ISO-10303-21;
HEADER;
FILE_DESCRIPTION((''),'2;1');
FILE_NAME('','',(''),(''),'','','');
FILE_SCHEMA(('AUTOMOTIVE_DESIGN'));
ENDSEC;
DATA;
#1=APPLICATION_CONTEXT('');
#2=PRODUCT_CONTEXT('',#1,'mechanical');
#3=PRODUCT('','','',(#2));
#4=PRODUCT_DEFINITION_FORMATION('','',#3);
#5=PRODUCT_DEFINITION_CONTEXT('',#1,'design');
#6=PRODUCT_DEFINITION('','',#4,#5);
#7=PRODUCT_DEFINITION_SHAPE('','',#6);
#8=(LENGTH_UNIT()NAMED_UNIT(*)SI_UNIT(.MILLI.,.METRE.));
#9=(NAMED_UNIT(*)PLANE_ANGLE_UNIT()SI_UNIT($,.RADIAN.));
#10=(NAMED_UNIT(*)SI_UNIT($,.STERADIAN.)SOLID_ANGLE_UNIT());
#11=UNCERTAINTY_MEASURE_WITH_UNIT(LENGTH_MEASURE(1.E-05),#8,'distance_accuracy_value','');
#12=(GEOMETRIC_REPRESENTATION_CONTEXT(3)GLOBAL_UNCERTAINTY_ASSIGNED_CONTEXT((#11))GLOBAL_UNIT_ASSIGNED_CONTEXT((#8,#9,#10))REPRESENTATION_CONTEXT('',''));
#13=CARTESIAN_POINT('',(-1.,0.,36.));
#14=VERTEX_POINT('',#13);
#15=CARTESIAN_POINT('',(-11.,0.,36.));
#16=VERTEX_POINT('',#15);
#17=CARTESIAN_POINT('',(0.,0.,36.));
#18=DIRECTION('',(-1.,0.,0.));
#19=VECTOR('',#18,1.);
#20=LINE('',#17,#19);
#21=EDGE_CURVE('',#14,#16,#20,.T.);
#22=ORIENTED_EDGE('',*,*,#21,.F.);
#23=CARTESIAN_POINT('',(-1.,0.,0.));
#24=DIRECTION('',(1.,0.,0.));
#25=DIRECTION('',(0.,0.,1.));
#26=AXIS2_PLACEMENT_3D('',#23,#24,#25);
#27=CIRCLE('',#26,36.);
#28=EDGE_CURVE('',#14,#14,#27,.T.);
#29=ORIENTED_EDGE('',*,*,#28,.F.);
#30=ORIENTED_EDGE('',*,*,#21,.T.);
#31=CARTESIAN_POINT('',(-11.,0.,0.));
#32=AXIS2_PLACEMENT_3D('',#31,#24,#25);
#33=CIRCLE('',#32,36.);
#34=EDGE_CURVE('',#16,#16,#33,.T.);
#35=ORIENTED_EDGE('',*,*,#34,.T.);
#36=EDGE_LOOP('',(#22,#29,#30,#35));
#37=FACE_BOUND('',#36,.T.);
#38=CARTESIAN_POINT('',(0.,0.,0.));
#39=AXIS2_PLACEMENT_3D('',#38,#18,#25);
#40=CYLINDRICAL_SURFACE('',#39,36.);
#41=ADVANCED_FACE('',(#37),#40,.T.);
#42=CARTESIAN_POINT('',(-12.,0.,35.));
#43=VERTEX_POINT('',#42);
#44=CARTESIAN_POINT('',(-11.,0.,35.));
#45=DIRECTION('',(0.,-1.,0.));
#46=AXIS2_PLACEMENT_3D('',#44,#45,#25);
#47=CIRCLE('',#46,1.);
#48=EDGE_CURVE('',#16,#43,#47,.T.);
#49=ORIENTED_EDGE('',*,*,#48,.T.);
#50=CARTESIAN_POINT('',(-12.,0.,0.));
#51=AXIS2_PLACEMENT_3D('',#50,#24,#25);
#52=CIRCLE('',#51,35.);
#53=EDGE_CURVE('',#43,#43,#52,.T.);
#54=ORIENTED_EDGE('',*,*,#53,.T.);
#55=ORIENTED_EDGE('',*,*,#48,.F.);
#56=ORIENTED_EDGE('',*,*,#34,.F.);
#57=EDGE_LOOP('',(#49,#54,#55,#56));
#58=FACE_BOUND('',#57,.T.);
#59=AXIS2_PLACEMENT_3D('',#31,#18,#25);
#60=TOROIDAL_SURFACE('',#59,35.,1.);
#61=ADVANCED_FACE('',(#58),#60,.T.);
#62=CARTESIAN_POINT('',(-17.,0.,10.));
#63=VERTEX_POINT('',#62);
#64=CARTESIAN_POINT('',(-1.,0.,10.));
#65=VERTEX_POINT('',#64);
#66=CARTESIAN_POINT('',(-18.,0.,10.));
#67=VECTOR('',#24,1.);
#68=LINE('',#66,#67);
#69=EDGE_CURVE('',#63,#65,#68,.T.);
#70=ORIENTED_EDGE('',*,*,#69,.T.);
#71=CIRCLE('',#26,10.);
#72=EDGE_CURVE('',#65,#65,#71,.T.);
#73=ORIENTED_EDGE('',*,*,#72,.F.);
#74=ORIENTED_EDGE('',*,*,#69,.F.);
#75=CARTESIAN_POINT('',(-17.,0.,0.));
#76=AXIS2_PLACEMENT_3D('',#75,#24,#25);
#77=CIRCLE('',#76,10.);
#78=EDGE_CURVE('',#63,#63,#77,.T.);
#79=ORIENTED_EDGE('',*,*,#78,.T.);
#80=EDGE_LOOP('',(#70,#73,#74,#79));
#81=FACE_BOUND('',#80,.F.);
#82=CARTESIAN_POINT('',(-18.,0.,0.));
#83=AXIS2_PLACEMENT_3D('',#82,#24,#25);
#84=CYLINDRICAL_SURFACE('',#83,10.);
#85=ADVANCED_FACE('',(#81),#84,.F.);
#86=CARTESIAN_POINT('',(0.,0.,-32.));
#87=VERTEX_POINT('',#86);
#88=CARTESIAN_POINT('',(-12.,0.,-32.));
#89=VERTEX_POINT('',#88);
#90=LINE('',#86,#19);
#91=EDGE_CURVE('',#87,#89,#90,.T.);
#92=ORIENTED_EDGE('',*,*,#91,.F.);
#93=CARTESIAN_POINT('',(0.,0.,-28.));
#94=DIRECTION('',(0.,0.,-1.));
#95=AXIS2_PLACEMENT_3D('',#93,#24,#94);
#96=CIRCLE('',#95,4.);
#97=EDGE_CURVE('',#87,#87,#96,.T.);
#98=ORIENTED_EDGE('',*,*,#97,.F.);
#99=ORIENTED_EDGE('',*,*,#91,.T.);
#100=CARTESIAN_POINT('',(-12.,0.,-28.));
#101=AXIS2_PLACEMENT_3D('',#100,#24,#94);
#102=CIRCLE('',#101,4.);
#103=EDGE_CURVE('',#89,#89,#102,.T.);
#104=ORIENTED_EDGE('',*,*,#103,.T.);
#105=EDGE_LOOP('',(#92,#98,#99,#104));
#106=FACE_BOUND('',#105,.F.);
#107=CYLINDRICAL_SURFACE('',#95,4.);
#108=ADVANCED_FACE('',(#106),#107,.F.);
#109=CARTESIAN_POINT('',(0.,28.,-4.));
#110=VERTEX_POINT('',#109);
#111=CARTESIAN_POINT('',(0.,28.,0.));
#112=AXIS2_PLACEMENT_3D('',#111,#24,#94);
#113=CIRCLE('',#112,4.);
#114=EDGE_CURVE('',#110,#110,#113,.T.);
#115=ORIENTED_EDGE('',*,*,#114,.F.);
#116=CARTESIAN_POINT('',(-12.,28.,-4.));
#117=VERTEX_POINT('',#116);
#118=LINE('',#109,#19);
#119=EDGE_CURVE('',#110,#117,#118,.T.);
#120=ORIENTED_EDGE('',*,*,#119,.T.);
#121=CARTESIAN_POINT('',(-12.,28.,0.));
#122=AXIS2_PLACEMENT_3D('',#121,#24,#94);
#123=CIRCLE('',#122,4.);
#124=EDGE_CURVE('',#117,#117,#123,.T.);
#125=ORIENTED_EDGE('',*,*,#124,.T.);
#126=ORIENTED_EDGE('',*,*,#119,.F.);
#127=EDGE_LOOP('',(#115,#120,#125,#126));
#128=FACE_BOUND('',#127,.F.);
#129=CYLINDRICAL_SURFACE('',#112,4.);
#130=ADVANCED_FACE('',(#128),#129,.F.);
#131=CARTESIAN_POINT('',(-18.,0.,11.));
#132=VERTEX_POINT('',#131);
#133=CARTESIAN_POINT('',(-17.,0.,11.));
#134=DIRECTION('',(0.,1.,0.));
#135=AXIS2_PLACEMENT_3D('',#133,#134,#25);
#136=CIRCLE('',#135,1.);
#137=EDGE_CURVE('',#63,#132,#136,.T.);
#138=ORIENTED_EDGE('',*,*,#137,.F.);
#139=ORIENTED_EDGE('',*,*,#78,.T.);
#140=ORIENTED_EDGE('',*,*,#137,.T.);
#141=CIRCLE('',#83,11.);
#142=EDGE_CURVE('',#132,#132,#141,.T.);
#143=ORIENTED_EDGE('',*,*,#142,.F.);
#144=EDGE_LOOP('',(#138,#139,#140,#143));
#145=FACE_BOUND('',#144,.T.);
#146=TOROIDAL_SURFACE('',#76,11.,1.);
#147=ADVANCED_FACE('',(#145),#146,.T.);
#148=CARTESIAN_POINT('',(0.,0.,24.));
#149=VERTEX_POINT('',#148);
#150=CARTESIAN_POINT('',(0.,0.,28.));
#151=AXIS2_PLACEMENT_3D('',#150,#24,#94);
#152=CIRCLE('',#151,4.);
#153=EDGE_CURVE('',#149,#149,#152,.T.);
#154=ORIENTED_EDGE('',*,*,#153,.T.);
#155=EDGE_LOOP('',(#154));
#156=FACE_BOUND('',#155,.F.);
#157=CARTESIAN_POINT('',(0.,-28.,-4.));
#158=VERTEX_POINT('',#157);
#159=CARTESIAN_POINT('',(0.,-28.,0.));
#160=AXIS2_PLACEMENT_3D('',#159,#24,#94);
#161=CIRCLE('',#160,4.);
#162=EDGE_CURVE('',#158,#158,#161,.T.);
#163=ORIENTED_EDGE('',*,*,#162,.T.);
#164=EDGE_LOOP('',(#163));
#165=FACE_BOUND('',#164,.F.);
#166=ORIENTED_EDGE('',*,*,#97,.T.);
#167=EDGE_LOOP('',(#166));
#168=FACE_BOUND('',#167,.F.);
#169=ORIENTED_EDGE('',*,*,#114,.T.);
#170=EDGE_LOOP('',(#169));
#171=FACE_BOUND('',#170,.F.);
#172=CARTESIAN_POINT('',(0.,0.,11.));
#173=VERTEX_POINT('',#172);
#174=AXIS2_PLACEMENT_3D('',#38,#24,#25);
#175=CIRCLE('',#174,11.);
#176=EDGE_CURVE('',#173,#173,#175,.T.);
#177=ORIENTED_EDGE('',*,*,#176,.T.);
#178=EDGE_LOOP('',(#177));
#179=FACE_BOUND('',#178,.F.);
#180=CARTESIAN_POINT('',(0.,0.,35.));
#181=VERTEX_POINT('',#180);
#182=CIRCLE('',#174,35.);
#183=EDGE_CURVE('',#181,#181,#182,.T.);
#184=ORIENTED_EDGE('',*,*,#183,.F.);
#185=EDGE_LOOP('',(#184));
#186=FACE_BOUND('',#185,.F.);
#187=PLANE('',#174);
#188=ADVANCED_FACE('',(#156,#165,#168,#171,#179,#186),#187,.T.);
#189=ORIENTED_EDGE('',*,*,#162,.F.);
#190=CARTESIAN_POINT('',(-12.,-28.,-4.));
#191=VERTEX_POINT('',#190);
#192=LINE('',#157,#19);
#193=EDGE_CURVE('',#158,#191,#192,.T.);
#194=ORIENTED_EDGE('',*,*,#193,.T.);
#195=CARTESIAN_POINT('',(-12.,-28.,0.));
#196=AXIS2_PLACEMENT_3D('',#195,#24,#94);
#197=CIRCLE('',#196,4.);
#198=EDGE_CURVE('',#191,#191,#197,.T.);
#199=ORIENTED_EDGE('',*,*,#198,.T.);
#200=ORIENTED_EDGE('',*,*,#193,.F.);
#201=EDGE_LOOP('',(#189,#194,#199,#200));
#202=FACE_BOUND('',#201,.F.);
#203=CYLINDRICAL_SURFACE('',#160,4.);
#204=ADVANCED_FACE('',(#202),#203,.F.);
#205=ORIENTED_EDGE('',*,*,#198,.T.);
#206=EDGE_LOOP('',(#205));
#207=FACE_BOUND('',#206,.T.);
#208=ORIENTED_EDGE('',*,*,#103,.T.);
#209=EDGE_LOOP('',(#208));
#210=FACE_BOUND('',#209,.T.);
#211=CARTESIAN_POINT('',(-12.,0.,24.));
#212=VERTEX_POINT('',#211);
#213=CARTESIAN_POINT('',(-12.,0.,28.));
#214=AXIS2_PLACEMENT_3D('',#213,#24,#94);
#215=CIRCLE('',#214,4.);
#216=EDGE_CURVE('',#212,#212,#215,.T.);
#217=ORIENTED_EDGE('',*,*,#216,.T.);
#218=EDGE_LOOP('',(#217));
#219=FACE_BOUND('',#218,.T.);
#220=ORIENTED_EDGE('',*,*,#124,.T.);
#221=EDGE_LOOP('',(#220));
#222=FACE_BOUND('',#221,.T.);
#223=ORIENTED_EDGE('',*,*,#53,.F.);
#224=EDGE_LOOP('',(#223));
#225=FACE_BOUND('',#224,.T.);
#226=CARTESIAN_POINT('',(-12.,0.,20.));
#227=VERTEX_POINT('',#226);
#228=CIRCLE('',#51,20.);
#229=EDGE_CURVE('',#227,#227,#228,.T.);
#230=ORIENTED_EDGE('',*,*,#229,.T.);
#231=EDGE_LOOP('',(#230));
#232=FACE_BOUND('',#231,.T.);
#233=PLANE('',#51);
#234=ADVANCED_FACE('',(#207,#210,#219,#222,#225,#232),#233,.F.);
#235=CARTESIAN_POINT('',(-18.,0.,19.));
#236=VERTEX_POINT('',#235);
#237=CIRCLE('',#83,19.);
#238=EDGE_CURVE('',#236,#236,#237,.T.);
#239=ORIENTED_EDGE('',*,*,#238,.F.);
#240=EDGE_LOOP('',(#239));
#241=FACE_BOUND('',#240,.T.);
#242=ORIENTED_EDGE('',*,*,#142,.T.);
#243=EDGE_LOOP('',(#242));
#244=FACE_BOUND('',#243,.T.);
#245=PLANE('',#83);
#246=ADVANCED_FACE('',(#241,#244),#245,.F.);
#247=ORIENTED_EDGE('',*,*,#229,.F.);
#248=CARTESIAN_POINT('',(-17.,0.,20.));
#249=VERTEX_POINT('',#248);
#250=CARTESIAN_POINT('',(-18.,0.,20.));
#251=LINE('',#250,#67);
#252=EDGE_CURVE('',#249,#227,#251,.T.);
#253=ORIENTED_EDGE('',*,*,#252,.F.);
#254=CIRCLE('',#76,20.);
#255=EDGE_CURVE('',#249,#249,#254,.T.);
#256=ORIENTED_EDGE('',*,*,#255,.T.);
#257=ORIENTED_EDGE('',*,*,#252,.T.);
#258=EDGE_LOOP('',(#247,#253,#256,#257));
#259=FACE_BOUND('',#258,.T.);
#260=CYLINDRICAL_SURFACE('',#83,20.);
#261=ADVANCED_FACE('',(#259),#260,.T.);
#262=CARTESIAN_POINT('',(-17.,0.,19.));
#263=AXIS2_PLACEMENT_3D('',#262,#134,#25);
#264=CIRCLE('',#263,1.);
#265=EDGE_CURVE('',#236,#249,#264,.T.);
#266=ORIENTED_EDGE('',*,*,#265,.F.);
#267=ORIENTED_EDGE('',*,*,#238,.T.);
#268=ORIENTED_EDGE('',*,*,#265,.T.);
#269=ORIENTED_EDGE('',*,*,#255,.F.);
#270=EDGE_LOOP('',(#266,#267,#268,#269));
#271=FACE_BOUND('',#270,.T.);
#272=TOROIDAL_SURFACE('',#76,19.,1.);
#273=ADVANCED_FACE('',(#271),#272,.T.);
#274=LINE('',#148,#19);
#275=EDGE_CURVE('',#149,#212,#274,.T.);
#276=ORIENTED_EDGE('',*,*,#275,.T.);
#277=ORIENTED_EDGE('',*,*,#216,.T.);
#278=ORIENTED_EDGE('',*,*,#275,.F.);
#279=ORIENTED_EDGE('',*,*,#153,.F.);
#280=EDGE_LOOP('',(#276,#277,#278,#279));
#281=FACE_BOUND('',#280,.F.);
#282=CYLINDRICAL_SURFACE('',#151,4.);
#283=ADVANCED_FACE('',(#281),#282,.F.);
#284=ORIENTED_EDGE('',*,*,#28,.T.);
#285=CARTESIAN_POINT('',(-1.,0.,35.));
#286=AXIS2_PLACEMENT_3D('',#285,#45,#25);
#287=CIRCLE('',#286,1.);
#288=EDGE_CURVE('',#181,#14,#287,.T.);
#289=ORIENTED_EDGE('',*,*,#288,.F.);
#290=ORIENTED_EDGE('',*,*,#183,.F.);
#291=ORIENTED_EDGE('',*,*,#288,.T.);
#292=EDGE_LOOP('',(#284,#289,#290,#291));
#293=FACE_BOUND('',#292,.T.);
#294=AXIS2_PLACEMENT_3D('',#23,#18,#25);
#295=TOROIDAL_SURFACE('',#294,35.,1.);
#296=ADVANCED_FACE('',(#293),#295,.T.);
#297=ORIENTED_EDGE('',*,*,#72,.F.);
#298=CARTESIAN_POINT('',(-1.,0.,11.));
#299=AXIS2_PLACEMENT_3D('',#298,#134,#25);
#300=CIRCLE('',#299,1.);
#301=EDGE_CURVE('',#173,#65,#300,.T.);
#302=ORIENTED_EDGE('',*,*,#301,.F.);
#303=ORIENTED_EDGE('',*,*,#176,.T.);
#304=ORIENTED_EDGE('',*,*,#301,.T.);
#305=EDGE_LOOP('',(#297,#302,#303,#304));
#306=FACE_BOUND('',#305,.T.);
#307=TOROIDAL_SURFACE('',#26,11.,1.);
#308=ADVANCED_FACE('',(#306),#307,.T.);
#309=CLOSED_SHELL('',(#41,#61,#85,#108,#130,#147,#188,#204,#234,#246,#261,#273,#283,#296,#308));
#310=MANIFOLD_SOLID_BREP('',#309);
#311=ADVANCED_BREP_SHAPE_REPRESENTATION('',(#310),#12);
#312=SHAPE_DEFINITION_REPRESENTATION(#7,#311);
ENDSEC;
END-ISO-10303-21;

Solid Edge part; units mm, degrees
sketch "Sketch1" plane through (0, 0, 0) normal (0, -1, 0) x (1, 0, 0)
  line L0 (0, 10) -> (0, 36)
  line L1 (0, 36) -> (-12, 36)
  line L2 (-12, 20) -> (-12, 36)
  line L3 (-18, 20) -> (-12, 20)
  line L4 (-18, 10) -> (-18, 20)
  line L5 (-18, 10) -> (0, 10)
revolve "RevolvedProtrusion1" add sketch "Sketch1" angle 360 about axis through (-60, 0, 0) along (1, 0, 0)
sketch "Sketch2" plane through (0, 0, 0) normal (1, 0, 0) x (0, 0, -1)
  circle A0 centre (0, 28) radius 4
  circle A1 centre (-28, 0) radius 4
  circle A2 centre (0, -28) radius 4
  circle A3 centre (28, 0) radius 4
extrude "Cutout1" cut sketch "Sketch2" against normal blind 30
fillet "Round_1" radius 1 5 edges at (0, 0, -36) (-12, 0, -36) (-18, 0, -20) (-18, 0, -10) (0, 0, -10)
